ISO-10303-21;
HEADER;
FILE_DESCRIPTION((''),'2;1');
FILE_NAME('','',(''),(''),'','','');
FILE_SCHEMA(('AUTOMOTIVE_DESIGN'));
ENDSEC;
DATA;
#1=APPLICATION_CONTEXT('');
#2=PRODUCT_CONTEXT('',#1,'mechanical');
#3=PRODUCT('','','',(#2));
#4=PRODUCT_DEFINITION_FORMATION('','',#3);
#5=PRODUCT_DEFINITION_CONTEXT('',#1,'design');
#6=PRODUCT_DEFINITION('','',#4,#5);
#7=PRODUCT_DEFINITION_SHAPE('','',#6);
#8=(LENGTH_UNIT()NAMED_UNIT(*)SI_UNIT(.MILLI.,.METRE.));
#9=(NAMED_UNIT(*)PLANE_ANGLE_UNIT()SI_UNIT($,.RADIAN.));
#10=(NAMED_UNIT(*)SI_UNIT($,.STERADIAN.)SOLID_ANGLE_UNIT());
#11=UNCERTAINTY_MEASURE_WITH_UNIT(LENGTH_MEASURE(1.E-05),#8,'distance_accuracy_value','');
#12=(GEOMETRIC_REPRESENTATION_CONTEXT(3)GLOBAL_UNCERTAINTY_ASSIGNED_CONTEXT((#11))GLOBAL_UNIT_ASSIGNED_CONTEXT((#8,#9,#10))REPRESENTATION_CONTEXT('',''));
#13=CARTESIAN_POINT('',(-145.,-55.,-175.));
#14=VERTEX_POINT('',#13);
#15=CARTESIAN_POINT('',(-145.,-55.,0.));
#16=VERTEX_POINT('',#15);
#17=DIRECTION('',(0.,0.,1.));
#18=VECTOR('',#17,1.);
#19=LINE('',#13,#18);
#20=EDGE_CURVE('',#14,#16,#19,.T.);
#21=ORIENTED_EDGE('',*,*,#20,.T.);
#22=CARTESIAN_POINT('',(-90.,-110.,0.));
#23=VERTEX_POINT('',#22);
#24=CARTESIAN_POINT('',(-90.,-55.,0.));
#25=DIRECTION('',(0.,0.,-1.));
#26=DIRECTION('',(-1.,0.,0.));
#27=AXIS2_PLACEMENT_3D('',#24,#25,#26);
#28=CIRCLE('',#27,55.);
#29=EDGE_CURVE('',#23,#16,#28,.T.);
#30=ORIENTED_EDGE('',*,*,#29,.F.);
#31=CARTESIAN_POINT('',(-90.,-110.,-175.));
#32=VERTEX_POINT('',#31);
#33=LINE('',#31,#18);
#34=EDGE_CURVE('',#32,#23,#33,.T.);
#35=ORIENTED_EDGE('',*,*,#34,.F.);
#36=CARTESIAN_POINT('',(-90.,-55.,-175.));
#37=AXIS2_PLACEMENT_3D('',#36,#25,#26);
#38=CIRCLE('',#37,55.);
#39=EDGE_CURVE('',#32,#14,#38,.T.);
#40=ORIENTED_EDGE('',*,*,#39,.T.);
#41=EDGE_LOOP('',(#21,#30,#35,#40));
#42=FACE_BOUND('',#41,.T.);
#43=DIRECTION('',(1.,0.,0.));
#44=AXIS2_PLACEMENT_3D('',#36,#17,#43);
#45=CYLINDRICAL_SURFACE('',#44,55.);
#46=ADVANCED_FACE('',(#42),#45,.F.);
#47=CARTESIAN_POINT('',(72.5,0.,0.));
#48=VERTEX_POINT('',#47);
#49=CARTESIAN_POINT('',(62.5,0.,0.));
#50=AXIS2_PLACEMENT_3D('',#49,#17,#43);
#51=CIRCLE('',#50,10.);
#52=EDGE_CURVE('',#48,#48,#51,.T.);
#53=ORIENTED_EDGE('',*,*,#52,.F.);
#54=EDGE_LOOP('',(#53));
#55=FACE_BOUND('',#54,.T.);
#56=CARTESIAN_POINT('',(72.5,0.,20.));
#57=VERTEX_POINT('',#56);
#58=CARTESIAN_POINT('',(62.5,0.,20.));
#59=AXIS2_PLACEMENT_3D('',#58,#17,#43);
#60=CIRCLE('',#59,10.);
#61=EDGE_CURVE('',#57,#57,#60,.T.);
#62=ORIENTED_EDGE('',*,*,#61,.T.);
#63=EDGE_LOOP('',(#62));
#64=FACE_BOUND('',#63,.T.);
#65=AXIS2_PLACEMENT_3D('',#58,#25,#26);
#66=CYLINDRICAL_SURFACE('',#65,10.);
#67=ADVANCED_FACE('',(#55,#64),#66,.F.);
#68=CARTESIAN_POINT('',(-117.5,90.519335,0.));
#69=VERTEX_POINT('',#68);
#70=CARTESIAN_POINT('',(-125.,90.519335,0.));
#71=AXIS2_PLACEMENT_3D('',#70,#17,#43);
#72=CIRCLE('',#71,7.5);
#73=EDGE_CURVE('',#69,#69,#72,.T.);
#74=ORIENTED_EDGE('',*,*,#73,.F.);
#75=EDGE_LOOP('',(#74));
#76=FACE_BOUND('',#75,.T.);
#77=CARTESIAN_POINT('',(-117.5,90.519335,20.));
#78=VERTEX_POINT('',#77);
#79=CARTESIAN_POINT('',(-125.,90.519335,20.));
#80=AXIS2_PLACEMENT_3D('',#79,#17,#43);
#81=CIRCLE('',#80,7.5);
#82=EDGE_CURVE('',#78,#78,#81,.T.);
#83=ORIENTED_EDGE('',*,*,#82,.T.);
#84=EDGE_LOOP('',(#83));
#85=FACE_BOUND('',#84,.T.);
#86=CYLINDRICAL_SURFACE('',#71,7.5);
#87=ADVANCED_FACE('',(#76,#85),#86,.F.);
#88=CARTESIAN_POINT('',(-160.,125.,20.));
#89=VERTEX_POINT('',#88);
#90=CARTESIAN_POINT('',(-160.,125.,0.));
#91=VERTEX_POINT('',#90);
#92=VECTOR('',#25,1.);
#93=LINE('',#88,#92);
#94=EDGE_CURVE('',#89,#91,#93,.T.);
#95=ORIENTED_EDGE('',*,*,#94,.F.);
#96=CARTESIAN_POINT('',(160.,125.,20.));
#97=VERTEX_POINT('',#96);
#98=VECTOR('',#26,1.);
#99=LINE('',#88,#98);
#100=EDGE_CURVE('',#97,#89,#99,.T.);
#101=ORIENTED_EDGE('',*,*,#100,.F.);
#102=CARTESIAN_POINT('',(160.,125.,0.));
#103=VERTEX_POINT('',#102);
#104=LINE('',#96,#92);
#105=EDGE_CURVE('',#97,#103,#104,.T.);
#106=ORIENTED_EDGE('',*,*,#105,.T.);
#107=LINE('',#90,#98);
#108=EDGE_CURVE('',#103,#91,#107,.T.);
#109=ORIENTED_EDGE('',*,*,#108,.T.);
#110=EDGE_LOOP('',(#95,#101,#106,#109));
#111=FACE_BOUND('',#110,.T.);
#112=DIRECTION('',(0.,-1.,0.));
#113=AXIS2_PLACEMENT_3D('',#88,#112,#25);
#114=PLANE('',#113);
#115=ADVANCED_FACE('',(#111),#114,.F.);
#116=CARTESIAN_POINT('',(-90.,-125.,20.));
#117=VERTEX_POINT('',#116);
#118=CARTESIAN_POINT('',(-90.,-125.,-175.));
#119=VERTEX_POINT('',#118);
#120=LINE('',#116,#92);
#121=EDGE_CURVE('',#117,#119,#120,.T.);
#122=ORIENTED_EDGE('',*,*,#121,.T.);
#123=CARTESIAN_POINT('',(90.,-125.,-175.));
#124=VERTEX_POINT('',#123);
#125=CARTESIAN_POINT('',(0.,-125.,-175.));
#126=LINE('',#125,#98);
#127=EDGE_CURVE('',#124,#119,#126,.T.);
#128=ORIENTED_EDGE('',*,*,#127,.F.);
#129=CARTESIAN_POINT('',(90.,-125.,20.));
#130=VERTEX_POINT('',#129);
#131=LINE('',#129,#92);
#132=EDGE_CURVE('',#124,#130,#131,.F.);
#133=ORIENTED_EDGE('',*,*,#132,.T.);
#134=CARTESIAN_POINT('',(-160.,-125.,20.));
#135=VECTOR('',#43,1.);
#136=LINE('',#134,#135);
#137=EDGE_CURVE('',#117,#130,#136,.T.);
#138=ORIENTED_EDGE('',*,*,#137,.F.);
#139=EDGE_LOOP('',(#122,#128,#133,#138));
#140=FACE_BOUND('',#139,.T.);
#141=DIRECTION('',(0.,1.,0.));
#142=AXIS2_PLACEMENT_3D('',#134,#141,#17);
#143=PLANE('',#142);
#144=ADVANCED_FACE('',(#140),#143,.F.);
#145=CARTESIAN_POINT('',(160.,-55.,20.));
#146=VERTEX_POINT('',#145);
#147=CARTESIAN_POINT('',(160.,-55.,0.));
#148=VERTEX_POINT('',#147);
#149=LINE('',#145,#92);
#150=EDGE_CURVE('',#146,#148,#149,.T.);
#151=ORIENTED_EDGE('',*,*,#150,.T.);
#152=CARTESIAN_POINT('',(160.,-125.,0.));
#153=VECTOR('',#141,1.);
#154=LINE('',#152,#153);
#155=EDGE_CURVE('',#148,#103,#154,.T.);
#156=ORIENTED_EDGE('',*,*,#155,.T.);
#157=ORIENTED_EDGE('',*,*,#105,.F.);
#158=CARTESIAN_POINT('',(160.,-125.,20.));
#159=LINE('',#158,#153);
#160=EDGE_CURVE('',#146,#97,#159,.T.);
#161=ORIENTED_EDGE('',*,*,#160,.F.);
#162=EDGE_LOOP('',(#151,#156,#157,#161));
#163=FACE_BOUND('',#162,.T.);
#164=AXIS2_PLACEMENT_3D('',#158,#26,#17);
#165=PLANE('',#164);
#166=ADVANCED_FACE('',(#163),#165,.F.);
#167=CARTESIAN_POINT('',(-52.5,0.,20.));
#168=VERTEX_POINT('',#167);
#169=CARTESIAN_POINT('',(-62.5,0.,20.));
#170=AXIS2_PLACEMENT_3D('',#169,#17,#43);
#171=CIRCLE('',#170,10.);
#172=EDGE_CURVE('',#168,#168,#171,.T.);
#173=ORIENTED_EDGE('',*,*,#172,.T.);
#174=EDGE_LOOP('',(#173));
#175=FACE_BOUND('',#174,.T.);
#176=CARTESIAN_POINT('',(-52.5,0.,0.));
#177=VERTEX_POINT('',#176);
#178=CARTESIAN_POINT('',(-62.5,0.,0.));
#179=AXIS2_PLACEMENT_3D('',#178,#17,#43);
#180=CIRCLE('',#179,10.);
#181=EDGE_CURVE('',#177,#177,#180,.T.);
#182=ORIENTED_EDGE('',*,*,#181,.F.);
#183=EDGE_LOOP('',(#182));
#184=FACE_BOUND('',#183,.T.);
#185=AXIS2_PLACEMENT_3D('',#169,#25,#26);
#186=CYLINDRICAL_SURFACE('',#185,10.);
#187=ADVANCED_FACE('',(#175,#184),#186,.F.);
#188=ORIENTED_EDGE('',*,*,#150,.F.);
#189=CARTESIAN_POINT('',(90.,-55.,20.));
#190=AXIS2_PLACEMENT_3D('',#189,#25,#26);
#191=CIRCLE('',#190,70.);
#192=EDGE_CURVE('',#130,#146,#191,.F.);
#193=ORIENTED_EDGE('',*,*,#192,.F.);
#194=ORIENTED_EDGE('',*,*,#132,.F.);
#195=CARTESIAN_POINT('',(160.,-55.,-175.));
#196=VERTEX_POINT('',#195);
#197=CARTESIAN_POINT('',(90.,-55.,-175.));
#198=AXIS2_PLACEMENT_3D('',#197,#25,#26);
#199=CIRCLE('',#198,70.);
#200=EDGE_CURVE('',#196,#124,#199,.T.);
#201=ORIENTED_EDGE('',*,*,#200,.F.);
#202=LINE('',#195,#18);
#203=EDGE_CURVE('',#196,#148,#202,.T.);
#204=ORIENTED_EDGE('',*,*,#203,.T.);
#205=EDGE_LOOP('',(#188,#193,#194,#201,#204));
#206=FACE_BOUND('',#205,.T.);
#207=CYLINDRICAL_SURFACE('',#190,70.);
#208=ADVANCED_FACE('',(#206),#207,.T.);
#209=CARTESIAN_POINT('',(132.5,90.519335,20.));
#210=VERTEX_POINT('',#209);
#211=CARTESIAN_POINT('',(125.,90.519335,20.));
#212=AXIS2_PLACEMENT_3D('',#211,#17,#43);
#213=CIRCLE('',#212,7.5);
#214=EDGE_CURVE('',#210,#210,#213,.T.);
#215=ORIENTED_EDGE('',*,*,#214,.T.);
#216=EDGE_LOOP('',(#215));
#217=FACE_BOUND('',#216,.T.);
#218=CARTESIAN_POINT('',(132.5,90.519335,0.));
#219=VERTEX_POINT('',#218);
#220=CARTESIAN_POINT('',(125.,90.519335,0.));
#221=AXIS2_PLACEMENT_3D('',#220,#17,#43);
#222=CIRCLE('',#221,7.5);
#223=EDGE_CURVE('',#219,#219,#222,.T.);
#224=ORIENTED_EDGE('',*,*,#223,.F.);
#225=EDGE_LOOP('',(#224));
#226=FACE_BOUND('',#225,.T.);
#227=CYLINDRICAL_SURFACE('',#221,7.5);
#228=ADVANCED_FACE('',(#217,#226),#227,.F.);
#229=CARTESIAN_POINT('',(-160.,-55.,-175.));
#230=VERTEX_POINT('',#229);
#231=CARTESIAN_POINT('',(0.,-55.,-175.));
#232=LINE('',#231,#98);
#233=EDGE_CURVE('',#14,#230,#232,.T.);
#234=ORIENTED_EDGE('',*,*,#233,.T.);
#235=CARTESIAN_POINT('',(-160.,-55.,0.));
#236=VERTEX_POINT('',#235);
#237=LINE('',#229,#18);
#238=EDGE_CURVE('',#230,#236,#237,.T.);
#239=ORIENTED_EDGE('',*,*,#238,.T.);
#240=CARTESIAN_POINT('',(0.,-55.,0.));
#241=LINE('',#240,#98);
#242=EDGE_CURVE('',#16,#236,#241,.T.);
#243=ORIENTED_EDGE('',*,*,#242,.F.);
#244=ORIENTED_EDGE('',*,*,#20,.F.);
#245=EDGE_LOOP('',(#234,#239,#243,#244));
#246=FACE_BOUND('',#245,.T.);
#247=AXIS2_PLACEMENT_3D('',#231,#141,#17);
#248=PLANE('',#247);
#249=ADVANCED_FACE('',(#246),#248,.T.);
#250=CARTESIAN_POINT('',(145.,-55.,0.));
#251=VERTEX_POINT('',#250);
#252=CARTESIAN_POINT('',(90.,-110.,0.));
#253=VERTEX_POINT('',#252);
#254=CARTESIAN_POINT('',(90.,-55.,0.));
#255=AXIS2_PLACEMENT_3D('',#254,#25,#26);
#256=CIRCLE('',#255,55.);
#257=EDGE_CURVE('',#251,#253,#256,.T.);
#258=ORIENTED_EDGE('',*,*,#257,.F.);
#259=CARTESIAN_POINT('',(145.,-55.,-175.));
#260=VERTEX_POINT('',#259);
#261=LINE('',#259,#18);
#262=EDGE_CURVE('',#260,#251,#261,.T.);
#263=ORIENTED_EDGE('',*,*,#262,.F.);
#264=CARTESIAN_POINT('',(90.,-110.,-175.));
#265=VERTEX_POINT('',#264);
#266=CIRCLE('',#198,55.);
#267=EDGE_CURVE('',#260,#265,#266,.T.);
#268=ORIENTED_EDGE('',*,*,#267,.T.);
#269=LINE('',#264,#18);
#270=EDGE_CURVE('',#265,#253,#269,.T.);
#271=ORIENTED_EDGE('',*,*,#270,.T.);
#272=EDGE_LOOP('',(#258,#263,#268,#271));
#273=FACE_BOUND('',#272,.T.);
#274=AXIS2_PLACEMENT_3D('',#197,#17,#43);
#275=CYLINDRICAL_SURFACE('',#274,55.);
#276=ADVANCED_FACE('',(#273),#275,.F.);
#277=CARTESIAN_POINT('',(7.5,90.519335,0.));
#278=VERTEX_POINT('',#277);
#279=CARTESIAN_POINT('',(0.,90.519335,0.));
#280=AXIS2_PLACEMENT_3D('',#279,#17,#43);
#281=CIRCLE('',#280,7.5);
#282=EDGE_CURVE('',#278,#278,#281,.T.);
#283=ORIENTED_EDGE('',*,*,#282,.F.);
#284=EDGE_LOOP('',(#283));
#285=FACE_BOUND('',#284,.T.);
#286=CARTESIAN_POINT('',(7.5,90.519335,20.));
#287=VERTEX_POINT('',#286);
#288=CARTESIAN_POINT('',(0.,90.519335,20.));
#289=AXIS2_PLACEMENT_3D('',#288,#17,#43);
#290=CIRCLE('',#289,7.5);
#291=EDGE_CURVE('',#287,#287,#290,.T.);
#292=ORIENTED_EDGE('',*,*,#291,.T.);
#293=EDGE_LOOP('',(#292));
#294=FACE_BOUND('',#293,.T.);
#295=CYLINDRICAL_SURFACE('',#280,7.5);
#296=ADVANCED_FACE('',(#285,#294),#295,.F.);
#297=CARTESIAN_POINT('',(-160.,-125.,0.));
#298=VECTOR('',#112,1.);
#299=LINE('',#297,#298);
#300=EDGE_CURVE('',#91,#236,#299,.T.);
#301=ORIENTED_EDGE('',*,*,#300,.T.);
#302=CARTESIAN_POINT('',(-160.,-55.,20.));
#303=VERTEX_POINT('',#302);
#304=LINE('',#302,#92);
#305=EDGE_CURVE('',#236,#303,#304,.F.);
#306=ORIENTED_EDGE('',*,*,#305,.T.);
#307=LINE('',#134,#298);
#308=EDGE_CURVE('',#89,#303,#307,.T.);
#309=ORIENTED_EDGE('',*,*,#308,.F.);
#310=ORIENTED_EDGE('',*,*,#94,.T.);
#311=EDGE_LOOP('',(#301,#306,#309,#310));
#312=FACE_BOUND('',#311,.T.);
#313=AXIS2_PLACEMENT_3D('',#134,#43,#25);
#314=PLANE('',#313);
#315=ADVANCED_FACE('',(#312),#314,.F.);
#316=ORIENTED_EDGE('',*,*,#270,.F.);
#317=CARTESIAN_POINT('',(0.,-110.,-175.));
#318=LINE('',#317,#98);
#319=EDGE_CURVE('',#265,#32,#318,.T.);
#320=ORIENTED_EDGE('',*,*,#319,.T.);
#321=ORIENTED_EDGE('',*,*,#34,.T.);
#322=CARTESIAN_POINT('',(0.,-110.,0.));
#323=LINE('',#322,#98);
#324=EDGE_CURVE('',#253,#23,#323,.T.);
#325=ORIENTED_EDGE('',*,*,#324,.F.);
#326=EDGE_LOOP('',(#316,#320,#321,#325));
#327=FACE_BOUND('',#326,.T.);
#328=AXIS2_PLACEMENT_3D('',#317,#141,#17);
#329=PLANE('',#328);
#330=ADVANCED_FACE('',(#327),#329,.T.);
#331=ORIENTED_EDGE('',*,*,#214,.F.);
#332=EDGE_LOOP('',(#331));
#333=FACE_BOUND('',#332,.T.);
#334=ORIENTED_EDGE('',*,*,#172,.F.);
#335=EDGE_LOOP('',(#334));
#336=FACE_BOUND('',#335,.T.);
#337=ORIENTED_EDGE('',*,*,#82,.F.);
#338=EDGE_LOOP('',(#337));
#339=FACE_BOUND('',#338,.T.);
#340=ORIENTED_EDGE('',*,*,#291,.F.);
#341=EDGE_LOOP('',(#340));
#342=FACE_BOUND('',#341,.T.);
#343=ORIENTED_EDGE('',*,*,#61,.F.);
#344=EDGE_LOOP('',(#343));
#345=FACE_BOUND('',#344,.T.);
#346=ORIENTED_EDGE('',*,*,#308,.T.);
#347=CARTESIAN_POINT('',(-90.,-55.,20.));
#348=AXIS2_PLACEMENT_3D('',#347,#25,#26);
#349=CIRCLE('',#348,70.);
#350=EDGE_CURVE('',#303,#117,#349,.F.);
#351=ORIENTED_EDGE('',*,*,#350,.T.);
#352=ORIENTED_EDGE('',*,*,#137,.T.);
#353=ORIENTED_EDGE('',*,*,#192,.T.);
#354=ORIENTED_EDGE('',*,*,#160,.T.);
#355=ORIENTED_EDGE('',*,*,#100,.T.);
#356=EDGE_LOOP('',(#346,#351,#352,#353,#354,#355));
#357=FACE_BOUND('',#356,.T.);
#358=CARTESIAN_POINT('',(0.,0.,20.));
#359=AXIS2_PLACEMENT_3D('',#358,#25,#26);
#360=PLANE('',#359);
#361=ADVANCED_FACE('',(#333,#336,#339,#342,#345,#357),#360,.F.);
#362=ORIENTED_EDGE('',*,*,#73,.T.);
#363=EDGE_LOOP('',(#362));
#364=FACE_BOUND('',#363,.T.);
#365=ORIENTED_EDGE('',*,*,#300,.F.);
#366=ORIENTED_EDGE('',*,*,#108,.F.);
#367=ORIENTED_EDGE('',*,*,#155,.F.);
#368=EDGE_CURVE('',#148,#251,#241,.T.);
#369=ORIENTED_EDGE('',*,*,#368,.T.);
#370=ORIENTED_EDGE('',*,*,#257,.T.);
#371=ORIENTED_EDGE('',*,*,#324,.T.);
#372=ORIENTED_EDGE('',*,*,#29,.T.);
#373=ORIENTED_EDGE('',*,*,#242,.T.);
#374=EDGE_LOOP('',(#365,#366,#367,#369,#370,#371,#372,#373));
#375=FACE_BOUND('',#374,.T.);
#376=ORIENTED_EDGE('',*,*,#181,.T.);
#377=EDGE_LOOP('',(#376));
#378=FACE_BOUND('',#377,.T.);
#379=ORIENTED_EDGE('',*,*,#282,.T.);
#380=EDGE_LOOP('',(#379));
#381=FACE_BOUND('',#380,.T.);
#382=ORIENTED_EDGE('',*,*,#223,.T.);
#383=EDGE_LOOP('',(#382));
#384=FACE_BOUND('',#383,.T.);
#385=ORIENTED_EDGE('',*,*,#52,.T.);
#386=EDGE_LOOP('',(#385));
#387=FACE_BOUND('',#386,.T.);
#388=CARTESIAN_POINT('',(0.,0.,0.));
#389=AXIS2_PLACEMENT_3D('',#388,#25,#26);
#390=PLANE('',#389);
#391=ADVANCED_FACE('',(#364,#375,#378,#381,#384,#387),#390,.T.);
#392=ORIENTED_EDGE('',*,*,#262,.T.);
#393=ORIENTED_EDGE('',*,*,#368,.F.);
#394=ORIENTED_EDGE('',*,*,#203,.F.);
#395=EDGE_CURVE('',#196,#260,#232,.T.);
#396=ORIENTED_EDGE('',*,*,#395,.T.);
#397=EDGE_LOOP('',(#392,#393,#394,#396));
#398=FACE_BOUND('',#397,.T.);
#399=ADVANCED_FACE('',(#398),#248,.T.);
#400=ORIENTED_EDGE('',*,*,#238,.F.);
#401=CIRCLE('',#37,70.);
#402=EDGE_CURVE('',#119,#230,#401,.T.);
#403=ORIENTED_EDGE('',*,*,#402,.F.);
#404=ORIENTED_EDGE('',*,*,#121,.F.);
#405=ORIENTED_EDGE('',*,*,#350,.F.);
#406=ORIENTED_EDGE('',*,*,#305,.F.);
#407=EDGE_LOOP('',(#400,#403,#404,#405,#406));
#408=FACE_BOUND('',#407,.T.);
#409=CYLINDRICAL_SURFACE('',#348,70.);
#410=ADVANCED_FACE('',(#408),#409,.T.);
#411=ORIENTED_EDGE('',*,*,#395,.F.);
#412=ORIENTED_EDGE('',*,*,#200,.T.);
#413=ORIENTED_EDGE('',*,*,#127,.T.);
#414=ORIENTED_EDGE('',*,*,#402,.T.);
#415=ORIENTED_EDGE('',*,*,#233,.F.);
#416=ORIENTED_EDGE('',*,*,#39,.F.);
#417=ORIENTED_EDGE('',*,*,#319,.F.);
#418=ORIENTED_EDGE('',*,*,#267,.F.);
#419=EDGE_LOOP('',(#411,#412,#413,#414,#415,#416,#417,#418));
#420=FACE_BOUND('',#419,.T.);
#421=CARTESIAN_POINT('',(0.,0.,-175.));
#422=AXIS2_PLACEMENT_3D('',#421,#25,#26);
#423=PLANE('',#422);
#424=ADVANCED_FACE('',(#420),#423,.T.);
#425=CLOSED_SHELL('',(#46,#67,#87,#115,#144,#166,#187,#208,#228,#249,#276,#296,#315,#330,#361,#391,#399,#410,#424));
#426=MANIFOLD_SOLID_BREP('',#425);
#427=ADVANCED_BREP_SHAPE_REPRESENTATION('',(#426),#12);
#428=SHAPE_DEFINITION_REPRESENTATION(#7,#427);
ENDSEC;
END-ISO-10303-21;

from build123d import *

# Parameters (mm, degrees)
SKETCH1_W           = 320
SKETCH1_H           = 250
SKETCH1_R           = 10
BOSS_EXTRUDE1_DEPTH = 20
SKETCH2_R           = 7.5
CUT_EXTRUDE1_DEPTH  = 205.022057631
FILLET1_R           = 70
BOSS_EXTRUDE2_DEPTH = 175


# Read off the part's stored shape, not the designer's step: Boss-Extrude2
with BuildPart() as part:
    # Sketch1 → Boss-Extrude1 (new body)
    with BuildSketch(Plane.XY):
        Rectangle(SKETCH1_W, SKETCH1_H)
        with Locations((62.5, 0)):
            Circle(SKETCH1_R, mode=Mode.SUBTRACT)
        with Locations((-62.5, 0)):
            Circle(SKETCH1_R, mode=Mode.SUBTRACT)
    extrude(amount=BOSS_EXTRUDE1_DEPTH)

    # Sketch2 → Cut-Extrude1 (cut, through all)
    with BuildSketch(Plane.XY.offset(20)):
        with Locations((0, 90.519334951)):
            Circle(SKETCH2_R)
        with Locations((-125, 90.519334951)):
            Circle(SKETCH2_R)
        with Locations((125, 90.519334951)):
            Circle(SKETCH2_R)
    extrude(amount=-CUT_EXTRUDE1_DEPTH, mode=Mode.SUBTRACT)

    # Fillet1
    fillet1_edges = [part.edges().sort_by_distance(p)[0] for p in [
        (160, -125, 10),
        (-160, -125, 10),
    ]]
    fillet(fillet1_edges, radius=FILLET1_R)

    # Boss-Extrude2 outline → Boss-Extrude2 (add)
    with BuildSketch(Plane(origin=(0, 0, 0), x_dir=(-1, 0, 0), z_dir=(0, 0, -1))):
        with BuildLine():
            Line((-90, -125), (90, -125))
            ThreePointArc((90, -125), (139.497474683, -104.497474683), (160, -55))
            Line((160, -55), (145, -55))
            ThreePointArc((145, -55), (128.890872965, -93.890872965), (90, -110))
            Line((90, -110), (-90, -110))
            ThreePointArc((-90, -110), (-128.890872965, -93.890872965), (-145, -55))
            Line((-145, -55), (-160, -55))
            ThreePointArc((-160, -55), (-139.497474683, -104.497474683), (-90, -125))
        make_face()
    extrude(amount=BOSS_EXTRUDE2_DEPTH)


solid = part.part
